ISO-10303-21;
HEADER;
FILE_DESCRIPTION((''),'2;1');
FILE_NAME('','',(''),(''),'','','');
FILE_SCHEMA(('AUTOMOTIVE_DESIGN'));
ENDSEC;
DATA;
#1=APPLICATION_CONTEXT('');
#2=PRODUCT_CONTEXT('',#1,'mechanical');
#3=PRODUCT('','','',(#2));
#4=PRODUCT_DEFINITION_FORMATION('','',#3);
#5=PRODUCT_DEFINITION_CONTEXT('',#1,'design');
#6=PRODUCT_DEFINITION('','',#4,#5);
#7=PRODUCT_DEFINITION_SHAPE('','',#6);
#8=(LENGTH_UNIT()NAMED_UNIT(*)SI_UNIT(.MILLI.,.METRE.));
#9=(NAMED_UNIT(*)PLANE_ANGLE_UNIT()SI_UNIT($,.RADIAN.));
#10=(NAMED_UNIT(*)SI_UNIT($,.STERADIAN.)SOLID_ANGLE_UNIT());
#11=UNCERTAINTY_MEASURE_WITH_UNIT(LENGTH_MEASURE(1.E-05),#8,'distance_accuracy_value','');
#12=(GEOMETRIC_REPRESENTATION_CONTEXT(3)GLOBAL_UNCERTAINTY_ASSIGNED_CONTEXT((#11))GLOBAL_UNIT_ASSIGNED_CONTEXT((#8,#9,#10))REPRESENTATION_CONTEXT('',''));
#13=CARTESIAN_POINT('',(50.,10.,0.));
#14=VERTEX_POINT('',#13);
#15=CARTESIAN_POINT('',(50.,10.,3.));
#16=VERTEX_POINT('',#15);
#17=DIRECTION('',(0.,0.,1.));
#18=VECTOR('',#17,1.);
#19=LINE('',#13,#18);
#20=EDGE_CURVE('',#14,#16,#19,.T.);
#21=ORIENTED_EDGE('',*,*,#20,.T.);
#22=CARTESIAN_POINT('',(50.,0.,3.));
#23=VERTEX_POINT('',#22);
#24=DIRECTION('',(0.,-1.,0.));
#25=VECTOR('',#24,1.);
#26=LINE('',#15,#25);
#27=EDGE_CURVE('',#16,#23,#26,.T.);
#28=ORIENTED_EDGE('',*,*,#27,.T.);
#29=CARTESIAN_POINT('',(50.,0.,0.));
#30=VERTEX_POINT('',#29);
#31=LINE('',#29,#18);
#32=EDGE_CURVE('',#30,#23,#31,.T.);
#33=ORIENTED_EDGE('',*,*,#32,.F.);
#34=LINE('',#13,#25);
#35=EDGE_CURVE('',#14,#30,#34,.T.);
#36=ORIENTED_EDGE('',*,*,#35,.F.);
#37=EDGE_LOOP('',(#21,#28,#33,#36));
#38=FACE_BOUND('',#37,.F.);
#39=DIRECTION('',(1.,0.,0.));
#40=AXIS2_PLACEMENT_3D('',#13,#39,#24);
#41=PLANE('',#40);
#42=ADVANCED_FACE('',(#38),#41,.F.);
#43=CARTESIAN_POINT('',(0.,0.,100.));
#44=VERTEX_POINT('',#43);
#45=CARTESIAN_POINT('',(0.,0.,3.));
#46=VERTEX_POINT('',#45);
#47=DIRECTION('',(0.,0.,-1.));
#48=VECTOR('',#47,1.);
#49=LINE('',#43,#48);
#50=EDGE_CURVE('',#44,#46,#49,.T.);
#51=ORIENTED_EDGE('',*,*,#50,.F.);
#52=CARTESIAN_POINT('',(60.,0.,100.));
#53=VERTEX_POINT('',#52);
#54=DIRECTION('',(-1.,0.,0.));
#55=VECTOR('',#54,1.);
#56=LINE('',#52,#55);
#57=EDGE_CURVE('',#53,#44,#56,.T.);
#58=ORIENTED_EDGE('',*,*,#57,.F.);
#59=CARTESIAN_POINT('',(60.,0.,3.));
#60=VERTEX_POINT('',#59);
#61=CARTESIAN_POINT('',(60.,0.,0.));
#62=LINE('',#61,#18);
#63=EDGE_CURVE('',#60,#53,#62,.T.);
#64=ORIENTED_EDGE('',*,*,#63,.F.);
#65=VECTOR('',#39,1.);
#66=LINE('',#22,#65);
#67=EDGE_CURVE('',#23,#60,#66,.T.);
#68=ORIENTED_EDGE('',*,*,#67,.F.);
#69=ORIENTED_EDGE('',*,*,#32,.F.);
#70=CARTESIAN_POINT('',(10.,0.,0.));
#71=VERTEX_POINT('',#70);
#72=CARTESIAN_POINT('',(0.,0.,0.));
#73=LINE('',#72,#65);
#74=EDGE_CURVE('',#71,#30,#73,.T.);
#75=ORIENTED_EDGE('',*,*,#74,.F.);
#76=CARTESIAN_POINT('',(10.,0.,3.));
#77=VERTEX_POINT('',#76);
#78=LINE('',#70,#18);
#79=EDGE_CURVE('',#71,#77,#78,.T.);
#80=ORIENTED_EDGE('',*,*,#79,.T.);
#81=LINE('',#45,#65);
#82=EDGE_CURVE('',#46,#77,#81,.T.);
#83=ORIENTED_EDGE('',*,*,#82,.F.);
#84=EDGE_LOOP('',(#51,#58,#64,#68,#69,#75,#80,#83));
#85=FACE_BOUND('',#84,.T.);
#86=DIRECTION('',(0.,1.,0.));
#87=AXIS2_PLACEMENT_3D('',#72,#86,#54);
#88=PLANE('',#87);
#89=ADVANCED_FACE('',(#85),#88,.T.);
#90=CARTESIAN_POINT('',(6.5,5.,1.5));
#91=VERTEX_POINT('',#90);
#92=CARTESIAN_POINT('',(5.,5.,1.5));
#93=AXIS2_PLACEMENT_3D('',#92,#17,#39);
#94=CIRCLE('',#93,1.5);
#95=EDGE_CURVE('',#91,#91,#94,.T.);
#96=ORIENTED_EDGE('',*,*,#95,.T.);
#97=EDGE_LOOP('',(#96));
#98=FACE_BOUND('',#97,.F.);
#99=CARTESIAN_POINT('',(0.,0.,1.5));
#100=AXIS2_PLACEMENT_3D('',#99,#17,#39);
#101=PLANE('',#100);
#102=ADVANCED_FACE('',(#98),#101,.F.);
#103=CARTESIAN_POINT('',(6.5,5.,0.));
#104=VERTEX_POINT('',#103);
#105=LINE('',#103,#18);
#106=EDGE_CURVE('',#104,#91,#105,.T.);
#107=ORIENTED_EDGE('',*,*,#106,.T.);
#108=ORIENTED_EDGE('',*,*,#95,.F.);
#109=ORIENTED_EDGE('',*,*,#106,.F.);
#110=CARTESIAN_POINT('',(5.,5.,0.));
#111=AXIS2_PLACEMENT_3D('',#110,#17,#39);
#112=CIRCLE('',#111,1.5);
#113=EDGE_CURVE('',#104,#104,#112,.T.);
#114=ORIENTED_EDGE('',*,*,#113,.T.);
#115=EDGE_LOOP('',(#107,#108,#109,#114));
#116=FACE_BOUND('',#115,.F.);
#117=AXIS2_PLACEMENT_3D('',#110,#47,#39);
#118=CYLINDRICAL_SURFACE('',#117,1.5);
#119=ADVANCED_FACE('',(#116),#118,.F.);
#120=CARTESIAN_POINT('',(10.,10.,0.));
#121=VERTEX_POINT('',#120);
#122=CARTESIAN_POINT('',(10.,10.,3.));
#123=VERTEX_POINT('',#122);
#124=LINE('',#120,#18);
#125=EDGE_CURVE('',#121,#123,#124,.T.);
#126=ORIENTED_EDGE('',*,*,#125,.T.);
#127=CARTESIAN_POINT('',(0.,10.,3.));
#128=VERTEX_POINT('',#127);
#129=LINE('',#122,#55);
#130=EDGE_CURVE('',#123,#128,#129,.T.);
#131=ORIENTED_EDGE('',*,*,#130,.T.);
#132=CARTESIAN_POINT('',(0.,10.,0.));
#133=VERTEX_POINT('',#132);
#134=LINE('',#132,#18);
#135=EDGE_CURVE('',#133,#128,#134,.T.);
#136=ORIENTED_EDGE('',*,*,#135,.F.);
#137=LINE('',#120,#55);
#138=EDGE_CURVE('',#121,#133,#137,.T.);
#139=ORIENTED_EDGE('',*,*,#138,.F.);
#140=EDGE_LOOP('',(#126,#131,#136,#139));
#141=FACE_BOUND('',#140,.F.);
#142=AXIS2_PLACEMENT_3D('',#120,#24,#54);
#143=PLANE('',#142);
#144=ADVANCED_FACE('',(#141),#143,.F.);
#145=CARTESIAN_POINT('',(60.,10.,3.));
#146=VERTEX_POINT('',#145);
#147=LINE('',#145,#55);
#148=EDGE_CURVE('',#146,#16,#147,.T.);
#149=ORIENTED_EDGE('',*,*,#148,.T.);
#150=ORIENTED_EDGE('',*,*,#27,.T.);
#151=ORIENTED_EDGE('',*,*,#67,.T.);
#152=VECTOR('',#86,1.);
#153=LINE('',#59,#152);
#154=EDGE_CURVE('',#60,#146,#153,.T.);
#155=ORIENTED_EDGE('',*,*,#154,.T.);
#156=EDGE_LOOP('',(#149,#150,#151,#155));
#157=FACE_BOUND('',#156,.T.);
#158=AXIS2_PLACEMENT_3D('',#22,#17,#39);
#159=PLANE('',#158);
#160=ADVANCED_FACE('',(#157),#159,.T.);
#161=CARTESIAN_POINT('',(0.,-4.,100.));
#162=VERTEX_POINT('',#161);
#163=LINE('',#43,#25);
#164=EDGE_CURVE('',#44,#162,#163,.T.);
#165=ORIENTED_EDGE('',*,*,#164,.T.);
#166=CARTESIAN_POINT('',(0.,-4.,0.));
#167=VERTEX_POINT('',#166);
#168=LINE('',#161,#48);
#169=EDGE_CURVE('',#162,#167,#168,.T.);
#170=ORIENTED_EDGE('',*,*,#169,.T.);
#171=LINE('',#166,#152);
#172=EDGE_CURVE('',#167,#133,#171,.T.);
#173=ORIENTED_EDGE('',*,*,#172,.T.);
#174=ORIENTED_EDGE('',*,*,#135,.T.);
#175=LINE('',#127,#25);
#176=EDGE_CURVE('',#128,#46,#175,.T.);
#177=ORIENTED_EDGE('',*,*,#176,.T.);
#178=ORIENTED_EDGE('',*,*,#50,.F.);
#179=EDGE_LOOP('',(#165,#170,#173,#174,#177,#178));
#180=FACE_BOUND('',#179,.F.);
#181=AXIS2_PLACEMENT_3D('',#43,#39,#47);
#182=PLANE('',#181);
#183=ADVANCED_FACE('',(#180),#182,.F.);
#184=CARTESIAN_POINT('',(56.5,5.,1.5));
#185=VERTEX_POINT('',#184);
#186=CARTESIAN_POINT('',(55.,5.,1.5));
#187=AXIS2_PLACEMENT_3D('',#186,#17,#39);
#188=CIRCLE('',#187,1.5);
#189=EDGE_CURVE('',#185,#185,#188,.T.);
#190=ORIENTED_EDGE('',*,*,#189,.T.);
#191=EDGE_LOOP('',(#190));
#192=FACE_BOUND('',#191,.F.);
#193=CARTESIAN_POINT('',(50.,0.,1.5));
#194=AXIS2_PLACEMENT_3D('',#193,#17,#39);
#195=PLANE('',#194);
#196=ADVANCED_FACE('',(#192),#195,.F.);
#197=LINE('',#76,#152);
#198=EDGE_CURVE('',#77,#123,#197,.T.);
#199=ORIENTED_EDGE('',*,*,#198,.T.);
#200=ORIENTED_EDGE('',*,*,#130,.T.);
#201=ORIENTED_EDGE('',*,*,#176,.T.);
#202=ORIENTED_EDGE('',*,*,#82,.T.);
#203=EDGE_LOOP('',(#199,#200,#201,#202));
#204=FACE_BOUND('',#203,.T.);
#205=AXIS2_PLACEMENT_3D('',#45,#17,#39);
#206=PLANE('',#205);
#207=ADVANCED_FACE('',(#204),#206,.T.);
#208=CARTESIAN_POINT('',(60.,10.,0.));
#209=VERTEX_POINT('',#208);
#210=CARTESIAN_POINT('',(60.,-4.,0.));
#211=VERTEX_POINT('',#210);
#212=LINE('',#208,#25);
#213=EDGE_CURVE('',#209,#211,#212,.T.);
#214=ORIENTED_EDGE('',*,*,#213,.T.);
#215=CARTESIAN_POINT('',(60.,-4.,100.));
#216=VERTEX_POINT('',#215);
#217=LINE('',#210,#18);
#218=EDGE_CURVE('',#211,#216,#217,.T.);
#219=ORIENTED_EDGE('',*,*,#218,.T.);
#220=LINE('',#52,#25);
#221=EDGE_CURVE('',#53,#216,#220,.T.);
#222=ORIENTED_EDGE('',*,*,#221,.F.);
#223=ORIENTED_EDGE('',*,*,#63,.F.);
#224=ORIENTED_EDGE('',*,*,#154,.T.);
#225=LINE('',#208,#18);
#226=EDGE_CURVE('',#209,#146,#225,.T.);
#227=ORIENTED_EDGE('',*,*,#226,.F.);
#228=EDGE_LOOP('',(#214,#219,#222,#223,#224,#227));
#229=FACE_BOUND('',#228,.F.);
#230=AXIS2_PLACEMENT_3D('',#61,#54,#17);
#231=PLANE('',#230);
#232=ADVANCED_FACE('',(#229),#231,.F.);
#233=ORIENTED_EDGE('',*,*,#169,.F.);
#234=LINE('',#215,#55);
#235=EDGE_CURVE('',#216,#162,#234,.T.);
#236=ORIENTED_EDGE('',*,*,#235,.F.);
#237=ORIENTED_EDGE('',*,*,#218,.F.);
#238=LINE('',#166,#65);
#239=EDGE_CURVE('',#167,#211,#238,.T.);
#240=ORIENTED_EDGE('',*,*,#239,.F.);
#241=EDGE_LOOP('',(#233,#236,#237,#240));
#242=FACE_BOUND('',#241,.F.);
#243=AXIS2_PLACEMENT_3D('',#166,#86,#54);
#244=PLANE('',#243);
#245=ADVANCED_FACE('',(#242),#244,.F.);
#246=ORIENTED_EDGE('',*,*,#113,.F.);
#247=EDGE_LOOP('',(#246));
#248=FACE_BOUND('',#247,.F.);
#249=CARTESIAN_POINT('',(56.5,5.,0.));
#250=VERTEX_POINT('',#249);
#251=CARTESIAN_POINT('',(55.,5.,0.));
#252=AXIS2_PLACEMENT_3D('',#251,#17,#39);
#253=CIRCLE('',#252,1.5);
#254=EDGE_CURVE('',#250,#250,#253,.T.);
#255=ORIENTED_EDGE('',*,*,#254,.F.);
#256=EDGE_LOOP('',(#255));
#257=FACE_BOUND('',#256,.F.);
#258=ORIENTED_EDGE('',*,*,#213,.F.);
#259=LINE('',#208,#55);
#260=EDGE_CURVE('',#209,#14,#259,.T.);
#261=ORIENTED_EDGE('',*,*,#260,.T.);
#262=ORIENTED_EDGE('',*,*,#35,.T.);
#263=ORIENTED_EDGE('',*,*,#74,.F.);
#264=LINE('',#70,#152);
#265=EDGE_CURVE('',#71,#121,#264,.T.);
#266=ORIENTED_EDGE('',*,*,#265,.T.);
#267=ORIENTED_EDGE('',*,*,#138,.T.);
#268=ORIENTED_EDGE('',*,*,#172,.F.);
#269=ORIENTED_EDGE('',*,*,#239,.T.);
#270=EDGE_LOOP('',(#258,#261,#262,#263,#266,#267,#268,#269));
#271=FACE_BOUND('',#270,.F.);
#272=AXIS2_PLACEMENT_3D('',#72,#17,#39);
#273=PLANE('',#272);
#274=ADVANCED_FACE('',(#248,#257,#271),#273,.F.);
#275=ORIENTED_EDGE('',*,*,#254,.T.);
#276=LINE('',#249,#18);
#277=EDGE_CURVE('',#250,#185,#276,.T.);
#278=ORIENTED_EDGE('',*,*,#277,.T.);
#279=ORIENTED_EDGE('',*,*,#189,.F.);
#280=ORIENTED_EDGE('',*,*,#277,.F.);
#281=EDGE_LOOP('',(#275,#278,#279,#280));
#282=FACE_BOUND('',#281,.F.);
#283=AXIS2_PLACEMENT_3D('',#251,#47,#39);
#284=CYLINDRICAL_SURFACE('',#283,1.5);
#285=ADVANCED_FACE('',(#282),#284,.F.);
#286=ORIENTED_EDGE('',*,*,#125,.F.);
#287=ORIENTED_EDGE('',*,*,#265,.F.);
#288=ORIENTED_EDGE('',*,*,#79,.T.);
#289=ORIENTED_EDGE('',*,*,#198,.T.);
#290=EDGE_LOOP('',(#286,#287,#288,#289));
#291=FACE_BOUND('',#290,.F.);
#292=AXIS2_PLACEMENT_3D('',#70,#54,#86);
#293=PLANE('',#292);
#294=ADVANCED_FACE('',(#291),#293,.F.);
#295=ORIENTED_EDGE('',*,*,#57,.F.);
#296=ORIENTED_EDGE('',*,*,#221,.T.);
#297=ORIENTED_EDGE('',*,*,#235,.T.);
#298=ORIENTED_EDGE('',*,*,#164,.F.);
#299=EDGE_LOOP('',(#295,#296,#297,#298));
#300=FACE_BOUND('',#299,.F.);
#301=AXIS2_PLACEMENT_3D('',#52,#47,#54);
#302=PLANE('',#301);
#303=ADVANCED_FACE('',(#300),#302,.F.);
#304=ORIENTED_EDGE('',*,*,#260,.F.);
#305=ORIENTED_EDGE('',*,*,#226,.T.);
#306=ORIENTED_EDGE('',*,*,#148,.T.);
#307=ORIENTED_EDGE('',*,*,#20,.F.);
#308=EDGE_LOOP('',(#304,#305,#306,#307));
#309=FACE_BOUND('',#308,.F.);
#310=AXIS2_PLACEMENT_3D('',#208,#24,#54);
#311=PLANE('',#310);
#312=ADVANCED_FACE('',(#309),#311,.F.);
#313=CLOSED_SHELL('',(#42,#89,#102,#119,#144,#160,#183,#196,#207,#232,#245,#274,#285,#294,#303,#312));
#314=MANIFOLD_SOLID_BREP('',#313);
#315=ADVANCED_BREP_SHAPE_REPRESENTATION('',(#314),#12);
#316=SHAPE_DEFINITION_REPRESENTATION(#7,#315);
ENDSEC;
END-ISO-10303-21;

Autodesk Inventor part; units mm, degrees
ref_plane "YZ Plane" through (0, 0, 0) normal (1, 0, 0) x (0, 1, 0)
ref_plane "XZ Plane" through (0, 0, 0) normal (0, 1, 0) x (-1, 0, 0)
ref_plane "XY Plane" through (0, 0, 0) normal (0, 0, 1) x (1, 0, 0)
sketch "草圖1" plane through (0, 0, 0) normal (0, 0, 1) x (1, 0, 0)
  line L0 (0, 0) -> (10, 0)
  line L1 (10, 0) -> (10, 10)
  line L2 (10, 10) -> (0, 10)
  line L3 (0, 10) -> (0, 0)
  circle A0 centre (5, 5) radius 1.5
  point P0 (5, 10)
  point P1 (10, 5)
  dimension "d0" = 10
  dimension "d1" = 10
  dimension "d2" = 3
extrude "擠出1" add sketch "草圖1" along normal blind 3 contours L3 L2 L1 L0 | A0
extrude "擠出2" cut sketch "草圖1" along normal blind 1.5 contours A0
sketch "草圖2" plane through (0, 0, 0) normal (0, 1, 0) x (-1, 0, 0)
  line L0 (0, 0) -> (-60, 0)
  line L1 (-60, 0) -> (-60, 100)
  line L2 (-60, 100) -> (0, 100)
  line L3 (0, 100) -> (0, 0)
  dimension "d7" = 60
  dimension "d8" = 100
pattern_linear "矩形陣列1" count 2 spacing 50 along (1, 0, 0) of "擠出2", "擠出1"
extrude "擠出3" add sketch "草圖2" against normal blind 4
properties part number "110033226_ipt_42_城堡門口橋"
